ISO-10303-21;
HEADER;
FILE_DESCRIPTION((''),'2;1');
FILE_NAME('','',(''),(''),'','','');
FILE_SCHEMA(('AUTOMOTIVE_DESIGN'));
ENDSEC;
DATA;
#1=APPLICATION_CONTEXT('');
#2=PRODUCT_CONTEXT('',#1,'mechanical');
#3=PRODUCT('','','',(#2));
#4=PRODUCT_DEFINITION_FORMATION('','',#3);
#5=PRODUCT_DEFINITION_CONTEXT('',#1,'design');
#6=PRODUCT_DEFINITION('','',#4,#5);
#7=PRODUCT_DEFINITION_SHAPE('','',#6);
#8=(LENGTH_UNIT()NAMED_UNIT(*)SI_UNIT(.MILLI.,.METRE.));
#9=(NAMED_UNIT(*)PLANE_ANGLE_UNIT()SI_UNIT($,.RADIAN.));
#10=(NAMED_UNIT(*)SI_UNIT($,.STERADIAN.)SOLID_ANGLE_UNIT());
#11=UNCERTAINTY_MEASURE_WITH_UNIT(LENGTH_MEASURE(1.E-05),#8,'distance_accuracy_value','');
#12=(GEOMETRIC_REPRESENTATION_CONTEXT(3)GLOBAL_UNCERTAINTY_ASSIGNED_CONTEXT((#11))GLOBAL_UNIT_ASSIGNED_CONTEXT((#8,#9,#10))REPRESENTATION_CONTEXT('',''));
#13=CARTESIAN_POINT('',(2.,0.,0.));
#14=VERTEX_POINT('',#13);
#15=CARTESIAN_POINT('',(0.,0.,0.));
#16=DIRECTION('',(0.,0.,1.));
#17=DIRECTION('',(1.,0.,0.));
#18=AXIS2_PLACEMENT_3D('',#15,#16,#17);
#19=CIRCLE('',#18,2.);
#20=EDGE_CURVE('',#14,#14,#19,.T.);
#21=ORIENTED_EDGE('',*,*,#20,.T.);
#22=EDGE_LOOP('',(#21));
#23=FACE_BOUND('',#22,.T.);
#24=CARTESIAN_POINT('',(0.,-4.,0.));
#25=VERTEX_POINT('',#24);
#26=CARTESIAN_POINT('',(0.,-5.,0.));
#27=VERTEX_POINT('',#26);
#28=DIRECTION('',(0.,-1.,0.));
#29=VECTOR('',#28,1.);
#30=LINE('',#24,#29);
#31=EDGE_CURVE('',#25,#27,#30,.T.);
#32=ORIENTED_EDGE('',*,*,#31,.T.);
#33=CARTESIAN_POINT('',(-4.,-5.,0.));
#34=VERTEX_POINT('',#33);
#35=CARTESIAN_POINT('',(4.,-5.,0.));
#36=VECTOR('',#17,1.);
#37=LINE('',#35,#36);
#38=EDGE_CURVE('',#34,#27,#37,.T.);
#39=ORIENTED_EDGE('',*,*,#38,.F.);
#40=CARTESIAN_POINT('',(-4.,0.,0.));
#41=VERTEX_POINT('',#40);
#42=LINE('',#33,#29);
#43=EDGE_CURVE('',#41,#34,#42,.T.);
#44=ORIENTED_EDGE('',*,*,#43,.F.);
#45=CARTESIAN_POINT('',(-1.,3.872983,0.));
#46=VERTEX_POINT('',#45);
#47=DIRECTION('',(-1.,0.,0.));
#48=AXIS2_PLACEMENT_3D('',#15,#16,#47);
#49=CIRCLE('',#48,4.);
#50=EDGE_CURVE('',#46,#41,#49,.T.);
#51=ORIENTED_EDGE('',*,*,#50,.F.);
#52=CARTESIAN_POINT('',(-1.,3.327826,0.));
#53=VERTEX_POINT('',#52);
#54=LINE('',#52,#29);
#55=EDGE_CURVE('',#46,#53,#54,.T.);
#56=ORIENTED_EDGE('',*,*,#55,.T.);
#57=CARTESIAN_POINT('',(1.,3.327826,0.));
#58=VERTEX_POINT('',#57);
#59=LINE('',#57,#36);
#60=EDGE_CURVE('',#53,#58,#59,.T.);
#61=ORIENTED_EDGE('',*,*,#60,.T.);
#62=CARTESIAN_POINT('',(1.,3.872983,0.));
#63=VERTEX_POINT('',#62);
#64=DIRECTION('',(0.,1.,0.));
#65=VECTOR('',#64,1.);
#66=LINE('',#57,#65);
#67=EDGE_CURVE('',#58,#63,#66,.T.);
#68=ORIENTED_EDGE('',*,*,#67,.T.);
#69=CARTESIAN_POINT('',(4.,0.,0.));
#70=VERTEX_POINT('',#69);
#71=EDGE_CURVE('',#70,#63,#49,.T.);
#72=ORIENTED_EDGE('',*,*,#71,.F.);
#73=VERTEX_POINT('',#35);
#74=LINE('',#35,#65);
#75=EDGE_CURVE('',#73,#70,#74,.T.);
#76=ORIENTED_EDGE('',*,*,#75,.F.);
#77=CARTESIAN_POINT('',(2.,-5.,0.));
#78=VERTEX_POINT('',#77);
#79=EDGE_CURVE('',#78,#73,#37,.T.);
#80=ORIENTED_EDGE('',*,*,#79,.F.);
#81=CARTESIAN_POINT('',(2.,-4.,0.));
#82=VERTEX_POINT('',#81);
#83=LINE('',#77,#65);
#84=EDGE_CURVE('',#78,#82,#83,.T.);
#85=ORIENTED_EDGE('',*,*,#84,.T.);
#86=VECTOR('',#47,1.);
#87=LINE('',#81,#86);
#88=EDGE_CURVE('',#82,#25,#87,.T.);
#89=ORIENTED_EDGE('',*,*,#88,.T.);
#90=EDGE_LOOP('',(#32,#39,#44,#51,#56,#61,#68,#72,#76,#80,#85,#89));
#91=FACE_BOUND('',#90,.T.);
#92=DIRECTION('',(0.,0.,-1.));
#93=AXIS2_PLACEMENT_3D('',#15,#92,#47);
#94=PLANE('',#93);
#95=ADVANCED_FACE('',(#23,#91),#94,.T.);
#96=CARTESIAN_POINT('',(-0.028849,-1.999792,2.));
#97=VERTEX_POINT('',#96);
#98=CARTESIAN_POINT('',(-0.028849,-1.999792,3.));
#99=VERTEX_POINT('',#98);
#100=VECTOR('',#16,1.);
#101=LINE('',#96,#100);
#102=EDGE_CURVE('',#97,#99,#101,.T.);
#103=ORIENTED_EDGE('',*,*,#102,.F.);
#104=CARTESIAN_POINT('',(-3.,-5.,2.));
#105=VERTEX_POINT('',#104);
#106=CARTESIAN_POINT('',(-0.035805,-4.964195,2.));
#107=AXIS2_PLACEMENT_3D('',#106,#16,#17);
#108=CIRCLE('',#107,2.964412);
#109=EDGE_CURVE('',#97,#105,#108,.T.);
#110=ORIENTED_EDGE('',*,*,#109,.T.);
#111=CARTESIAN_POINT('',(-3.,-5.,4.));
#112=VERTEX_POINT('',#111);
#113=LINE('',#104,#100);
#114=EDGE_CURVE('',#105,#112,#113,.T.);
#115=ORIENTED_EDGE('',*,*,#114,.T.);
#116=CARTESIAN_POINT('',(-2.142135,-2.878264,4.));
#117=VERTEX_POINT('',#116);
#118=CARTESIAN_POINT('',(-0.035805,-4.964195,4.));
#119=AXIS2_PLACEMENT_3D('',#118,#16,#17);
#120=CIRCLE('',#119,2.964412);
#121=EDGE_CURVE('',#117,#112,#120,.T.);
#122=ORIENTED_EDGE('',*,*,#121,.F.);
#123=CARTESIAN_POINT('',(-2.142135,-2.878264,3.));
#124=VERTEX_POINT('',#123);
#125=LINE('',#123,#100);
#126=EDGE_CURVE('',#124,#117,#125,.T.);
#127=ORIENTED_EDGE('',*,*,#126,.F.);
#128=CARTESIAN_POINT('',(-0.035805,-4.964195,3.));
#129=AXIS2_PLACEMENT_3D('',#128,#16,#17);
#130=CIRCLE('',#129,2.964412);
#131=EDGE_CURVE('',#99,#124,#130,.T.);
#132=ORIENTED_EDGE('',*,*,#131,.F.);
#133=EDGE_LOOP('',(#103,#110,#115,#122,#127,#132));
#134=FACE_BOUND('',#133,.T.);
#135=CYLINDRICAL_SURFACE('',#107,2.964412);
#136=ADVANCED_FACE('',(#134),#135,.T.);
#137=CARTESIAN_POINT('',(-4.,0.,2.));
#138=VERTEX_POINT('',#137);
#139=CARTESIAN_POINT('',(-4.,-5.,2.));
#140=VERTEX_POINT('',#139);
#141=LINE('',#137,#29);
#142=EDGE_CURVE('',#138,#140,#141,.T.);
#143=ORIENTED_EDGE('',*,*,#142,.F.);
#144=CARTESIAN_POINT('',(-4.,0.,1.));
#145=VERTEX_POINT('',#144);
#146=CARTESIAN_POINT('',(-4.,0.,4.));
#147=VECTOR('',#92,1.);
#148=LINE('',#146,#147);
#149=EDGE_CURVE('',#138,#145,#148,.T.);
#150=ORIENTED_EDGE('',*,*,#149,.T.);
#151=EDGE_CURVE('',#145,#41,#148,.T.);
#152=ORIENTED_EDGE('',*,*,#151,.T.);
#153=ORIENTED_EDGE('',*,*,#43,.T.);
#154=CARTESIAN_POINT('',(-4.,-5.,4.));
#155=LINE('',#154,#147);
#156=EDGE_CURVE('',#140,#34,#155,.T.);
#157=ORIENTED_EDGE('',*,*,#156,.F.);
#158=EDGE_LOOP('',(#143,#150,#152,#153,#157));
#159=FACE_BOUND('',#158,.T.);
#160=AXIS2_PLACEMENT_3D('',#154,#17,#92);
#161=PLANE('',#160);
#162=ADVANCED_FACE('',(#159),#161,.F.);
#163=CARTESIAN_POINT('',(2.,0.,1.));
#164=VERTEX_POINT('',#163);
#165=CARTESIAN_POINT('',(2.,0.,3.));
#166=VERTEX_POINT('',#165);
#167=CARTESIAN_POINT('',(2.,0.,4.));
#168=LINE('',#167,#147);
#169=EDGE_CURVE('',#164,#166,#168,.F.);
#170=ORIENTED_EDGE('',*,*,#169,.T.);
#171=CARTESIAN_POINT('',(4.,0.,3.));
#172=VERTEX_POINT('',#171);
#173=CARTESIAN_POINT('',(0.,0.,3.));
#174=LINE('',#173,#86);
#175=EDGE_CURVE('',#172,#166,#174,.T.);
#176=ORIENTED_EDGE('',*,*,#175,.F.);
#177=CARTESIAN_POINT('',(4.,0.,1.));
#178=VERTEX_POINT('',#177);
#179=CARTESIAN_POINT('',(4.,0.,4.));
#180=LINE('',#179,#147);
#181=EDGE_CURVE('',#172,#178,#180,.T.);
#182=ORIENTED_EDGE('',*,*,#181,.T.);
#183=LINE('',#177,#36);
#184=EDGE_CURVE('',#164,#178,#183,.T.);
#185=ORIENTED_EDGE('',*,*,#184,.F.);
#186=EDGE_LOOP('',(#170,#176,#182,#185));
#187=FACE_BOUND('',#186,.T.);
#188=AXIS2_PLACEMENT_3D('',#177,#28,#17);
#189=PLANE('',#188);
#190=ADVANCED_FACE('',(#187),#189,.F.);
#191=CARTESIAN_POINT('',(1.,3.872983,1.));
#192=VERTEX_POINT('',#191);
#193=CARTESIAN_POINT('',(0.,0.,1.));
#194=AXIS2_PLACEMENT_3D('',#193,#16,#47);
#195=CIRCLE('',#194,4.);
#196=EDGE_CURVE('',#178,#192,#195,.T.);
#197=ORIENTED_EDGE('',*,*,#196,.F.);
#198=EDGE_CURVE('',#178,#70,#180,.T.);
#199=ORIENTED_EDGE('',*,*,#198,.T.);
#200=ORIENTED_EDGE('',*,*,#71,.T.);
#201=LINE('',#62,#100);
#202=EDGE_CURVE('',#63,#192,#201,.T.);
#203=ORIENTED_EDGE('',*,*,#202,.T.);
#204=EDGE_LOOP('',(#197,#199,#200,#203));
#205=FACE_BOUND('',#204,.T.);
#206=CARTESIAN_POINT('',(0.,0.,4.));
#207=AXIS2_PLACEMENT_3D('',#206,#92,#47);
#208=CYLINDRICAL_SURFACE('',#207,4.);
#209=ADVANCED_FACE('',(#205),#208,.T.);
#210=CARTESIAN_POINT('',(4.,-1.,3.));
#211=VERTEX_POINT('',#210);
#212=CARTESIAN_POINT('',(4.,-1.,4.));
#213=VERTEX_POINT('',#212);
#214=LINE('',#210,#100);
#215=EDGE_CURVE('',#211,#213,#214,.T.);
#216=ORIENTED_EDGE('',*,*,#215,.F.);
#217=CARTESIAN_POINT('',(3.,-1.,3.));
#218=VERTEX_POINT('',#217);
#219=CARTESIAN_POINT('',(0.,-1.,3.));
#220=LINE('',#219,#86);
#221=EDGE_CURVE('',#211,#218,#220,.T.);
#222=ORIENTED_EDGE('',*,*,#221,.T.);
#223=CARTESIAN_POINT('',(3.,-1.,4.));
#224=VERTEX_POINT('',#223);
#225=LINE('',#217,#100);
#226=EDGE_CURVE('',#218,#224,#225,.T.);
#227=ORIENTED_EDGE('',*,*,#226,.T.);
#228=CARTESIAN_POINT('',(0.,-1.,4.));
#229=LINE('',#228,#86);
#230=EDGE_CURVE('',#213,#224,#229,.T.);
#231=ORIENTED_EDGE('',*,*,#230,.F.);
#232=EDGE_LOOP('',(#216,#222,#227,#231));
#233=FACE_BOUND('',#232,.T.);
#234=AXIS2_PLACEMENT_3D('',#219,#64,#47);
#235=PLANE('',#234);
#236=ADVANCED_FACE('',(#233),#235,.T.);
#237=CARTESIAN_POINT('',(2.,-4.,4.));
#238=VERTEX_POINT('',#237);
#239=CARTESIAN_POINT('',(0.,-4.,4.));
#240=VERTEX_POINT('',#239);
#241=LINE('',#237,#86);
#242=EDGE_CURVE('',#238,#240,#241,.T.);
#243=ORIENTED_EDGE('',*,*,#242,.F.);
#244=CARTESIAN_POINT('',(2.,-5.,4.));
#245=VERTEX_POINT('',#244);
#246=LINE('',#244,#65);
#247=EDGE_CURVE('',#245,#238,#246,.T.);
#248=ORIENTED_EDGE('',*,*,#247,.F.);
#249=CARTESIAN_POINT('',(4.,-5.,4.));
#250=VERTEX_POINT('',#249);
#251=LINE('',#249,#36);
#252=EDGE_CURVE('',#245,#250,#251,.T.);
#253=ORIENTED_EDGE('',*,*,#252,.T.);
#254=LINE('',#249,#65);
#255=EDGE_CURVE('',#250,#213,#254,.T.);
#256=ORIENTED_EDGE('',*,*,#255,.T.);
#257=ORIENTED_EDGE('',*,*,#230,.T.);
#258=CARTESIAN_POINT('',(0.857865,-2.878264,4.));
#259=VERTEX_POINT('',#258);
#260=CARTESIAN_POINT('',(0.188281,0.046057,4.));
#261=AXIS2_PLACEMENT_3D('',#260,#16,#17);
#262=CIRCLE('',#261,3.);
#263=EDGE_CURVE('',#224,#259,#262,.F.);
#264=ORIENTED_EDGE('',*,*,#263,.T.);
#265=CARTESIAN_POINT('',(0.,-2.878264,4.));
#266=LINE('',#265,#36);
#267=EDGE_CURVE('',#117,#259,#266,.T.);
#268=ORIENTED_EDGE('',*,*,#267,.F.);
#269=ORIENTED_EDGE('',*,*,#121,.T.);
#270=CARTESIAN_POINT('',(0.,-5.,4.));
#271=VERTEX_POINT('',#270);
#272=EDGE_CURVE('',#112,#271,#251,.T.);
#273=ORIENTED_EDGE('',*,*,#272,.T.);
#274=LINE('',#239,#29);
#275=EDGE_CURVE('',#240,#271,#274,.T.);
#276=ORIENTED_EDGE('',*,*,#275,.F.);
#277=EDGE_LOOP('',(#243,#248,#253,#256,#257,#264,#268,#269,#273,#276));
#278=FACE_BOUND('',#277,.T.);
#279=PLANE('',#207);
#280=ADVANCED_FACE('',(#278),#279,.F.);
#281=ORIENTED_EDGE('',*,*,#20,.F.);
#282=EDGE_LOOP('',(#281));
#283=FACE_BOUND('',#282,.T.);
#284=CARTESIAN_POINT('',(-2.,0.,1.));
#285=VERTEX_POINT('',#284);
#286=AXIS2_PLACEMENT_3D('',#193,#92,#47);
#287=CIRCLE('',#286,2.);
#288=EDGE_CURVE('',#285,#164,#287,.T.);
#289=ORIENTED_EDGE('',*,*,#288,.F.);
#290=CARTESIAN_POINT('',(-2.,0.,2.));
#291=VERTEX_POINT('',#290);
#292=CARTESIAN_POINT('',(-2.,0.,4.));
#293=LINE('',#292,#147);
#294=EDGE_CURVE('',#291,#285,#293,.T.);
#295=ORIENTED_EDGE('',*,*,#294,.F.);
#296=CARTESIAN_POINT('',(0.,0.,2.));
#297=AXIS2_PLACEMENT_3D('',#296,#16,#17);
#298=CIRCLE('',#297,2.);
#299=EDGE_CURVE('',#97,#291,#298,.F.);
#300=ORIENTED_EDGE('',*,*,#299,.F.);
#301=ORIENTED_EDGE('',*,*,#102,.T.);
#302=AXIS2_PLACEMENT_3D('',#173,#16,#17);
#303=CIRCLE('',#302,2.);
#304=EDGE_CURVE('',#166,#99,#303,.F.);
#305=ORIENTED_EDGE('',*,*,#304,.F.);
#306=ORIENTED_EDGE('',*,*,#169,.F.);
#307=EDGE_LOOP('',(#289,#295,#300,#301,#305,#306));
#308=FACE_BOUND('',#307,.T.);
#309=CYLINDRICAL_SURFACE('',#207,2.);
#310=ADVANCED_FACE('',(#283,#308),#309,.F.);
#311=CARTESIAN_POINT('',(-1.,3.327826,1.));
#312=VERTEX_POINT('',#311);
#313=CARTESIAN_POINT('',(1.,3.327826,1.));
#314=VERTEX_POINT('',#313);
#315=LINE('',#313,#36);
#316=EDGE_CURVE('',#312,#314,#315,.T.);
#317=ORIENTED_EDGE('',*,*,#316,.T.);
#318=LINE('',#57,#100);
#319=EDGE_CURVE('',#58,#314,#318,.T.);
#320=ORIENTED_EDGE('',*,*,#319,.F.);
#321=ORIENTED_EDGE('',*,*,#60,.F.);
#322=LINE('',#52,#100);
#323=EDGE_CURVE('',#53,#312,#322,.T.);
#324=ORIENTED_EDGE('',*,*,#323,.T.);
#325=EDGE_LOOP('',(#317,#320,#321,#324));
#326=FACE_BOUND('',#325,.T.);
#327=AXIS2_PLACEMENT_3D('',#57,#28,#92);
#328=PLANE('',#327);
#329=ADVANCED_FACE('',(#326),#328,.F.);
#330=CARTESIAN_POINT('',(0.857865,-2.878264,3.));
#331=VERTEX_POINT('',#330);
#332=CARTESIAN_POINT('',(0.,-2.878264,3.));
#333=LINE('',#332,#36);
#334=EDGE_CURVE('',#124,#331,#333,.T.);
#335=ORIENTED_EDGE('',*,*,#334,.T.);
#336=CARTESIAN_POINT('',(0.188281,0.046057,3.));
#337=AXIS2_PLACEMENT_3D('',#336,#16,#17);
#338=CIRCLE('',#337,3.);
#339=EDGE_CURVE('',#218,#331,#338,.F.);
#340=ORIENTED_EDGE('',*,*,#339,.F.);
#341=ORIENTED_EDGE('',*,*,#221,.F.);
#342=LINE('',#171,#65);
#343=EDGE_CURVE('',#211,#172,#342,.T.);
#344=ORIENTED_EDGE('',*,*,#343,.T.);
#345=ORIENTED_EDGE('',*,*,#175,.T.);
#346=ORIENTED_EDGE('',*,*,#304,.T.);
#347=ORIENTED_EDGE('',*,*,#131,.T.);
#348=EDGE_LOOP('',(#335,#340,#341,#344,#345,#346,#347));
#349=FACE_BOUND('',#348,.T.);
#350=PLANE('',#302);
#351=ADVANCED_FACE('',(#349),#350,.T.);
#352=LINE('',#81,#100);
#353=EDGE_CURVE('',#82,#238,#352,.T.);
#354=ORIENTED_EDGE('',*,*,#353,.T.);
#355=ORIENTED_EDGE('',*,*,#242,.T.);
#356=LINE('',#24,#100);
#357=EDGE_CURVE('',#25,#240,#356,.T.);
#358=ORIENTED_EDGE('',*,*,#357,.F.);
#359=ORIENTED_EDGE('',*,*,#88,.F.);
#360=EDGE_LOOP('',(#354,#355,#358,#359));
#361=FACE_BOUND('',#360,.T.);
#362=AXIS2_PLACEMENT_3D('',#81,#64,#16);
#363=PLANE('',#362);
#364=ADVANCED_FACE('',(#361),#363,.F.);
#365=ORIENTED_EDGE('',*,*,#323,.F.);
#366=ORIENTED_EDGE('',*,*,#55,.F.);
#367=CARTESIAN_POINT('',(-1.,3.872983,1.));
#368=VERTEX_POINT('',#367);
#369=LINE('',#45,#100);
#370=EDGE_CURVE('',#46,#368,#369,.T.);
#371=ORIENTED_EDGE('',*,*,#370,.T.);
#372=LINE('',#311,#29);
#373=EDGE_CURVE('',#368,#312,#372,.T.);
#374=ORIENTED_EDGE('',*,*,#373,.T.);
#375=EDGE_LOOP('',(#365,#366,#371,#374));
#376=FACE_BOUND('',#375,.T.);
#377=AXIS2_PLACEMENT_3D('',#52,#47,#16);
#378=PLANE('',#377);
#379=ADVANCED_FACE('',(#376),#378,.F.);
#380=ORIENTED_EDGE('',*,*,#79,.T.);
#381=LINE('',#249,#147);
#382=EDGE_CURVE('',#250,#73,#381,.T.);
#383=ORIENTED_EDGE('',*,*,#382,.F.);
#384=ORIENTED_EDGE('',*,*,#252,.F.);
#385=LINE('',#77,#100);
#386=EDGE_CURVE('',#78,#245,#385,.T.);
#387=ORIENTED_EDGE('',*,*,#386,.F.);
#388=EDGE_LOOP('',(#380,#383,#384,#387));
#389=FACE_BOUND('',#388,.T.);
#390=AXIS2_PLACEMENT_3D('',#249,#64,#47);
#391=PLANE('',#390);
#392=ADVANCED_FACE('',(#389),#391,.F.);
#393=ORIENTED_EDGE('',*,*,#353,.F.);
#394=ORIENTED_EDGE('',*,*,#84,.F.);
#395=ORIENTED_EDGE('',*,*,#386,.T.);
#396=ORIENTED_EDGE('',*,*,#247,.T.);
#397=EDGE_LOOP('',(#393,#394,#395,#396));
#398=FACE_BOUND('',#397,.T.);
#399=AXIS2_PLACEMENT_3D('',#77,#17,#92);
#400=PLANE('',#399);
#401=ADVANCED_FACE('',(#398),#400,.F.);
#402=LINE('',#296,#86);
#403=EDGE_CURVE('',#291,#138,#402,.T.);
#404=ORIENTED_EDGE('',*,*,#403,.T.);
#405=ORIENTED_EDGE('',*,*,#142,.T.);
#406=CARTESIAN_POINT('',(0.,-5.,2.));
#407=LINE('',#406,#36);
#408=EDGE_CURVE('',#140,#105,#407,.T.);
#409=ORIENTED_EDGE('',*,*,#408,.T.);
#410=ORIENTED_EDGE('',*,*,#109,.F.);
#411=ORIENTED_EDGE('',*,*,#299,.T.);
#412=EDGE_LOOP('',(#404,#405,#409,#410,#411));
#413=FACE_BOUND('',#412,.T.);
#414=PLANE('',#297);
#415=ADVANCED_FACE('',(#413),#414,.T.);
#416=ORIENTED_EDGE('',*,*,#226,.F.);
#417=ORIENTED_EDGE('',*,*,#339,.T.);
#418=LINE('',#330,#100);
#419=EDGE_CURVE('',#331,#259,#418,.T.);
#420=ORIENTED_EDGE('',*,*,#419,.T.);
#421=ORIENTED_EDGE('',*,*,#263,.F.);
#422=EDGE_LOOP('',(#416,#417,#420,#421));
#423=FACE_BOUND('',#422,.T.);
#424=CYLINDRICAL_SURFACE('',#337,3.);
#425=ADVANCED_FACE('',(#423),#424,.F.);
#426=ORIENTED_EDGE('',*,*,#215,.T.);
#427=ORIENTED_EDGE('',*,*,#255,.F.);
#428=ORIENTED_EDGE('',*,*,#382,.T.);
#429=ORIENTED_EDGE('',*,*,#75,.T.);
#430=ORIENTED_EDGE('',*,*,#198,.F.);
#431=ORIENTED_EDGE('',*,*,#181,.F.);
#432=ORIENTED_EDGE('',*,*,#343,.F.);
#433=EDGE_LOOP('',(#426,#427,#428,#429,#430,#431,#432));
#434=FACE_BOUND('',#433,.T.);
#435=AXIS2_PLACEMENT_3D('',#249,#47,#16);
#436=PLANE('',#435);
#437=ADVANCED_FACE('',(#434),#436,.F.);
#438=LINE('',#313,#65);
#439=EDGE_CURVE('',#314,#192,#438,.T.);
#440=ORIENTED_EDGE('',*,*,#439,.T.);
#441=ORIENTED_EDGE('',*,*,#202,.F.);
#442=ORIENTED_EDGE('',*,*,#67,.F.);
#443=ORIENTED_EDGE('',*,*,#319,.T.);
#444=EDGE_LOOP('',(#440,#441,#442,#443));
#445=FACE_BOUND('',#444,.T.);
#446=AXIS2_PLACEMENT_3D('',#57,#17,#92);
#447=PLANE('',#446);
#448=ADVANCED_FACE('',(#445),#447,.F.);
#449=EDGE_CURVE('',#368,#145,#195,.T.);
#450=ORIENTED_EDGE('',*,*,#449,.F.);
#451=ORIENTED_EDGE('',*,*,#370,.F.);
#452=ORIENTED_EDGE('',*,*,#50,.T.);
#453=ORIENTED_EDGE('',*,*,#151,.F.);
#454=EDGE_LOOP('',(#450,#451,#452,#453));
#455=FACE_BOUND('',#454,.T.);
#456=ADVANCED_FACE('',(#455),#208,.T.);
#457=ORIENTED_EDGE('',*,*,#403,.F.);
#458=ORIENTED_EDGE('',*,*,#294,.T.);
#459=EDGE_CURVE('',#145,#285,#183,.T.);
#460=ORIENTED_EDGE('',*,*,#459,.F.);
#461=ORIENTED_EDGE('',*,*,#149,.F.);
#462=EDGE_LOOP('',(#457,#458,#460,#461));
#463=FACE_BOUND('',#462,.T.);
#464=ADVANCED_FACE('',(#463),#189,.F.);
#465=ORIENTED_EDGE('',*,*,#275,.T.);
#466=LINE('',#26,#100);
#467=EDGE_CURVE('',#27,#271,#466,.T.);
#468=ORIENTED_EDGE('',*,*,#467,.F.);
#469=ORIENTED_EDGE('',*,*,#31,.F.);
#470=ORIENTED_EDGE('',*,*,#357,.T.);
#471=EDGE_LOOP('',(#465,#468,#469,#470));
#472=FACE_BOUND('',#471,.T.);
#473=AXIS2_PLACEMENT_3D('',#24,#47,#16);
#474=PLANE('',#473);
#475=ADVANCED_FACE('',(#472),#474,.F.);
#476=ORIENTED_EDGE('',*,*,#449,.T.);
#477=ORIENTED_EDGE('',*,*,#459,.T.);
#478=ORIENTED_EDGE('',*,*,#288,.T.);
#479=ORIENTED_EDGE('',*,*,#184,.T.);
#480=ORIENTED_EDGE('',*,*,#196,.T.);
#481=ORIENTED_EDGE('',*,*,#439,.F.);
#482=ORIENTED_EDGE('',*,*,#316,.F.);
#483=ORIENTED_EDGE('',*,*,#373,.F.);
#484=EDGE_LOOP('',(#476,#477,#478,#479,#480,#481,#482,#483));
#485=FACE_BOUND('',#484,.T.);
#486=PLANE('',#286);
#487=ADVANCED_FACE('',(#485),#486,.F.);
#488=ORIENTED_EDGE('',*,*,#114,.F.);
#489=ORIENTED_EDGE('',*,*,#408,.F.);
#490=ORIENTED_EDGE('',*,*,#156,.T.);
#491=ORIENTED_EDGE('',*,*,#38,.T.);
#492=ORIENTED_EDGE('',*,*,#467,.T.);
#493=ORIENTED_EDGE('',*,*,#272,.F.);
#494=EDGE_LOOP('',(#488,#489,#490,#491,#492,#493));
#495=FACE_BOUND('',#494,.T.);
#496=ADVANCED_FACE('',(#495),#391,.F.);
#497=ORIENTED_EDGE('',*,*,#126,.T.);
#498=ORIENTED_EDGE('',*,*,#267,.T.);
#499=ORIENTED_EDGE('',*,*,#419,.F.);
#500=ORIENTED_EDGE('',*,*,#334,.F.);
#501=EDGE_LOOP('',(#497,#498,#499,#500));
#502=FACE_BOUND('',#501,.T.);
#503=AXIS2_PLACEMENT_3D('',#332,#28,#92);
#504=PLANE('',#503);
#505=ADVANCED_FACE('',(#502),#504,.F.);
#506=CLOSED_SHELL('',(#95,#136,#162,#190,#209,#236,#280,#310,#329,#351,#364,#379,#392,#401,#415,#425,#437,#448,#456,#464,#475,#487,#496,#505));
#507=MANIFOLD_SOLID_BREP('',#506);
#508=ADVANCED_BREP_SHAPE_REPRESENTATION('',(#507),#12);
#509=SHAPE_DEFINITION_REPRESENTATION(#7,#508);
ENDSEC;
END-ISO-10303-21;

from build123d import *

# Parameters (mm, degrees)
SKETCH1_R           = 2
BOSS_EXTRUDE1_DEPTH = 4
SKETCH2_W           = 2
SKETCH2_H           = 1
CUT_EXTRUDE1_DEPTH  = 4
CUT_EXTRUDE2_START  = -4
CUT_EXTRUDE2_DEPTH  = 4
CUT_EXTRUDE3_START  = -3
CUT_EXTRUDE3_DEPTH  = 3
CUT_EXTRUDE4_START  = -2
CUT_EXTRUDE4_DEPTH  = 2
CUT_EXTRUDE5_START  = -1
CUT_EXTRUDE5_DEPTH  = 1


# Read off the part's stored shape, not the designer's step: Cut-Extrude4
with BuildPart() as part:
    # Sketch1 → Boss-Extrude1 (new body)
    with BuildSketch(Plane.XY):
        with BuildLine():
            Line((4, -5), (-4, -5))
            Line((-4, -5), (-4, 0))
            ThreePointArc((-4, 0), (0, 4), (4, 0))
            Line((4, 0), (4, -5))
        make_face()
        Circle(SKETCH1_R, mode=Mode.SUBTRACT)
    extrude(amount=BOSS_EXTRUDE1_DEPTH)

    # Sketch2 → Cut-Extrude1 (cut)
    with BuildSketch(Plane.XY.offset(4)):
        with Locations((1, -4.5)):
            Rectangle(SKETCH2_W, SKETCH2_H)
    extrude(amount=-CUT_EXTRUDE1_DEPTH, mode=Mode.SUBTRACT)

    # Sketch3 → Cut-Extrude2 (cut)
    with BuildSketch(Plane.XY.offset(4).offset(CUT_EXTRUDE2_START)):
        with BuildLine():
            Line((1, 3.327826432), (-1, 3.327826432))
            Line((-1, 3.327826432), (-1, 3.872983346))
            ThreePointArc((-1, 3.872983346), (0, 4), (1, 3.872983346))
            Line((1, 3.872983346), (1, 3.327826432))
        make_face()
    extrude(amount=CUT_EXTRUDE2_DEPTH, mode=Mode.SUBTRACT)

    # Sketch5 → Cut-Extrude3 (cut)
    with BuildSketch(Plane.XY.offset(4).offset(CUT_EXTRUDE3_START)):
        with BuildLine():
            Line((4, 0), (-4, 0))
            ThreePointArc((-4, 0), (0, 4), (4, 0))
        make_face()
    extrude(amount=CUT_EXTRUDE3_DEPTH, mode=Mode.SUBTRACT)

    # Cut-Extrude4 outline → Cut-Extrude4 (cut)
    with BuildSketch(Plane.XY.offset(4).offset(CUT_EXTRUDE4_START)):
        with BuildLine():
            ThreePointArc((-3, -5), (-2.142135206, -2.878264494), (-0.028848782, -1.999791926))
            ThreePointArc((-0.028848782, -1.999791926), (-1.424376629, -1.403976929), (-2, 0))
            Line((-2, 0), (-4, 0))
            Line((-4, 0), (-4, -5))
            Line((-4, -5), (-3, -5))
        make_face()
    extrude(amount=CUT_EXTRUDE4_DEPTH, mode=Mode.SUBTRACT)

    # Sketch7 → Cut-Extrude5 (cut)
    with BuildSketch(Plane.XY.offset(4).offset(CUT_EXTRUDE5_START)):
        with BuildLine():
            Line((3, -1), (4, -1))
            Line((4, -1), (4, 0))
            Line((4, 0), (2, 0))
            ThreePointArc((2, 0), (1.403976929, -1.424376629), (-0.028848782, -1.999791926))
            ThreePointArc((-0.028848782, -1.999791926), (-1.173685148, -2.226867466), (-2.142135206, -2.878264494))
            Line((-2.142135206, -2.878264494), (0.857864794, -2.878264494))
            ThreePointArc((0.857864794, -2.878264494), (2.166117347, -2.209638468), (3, -1))
        make_face()
    extrude(amount=CUT_EXTRUDE5_DEPTH, mode=Mode.SUBTRACT)


solid = part.part
